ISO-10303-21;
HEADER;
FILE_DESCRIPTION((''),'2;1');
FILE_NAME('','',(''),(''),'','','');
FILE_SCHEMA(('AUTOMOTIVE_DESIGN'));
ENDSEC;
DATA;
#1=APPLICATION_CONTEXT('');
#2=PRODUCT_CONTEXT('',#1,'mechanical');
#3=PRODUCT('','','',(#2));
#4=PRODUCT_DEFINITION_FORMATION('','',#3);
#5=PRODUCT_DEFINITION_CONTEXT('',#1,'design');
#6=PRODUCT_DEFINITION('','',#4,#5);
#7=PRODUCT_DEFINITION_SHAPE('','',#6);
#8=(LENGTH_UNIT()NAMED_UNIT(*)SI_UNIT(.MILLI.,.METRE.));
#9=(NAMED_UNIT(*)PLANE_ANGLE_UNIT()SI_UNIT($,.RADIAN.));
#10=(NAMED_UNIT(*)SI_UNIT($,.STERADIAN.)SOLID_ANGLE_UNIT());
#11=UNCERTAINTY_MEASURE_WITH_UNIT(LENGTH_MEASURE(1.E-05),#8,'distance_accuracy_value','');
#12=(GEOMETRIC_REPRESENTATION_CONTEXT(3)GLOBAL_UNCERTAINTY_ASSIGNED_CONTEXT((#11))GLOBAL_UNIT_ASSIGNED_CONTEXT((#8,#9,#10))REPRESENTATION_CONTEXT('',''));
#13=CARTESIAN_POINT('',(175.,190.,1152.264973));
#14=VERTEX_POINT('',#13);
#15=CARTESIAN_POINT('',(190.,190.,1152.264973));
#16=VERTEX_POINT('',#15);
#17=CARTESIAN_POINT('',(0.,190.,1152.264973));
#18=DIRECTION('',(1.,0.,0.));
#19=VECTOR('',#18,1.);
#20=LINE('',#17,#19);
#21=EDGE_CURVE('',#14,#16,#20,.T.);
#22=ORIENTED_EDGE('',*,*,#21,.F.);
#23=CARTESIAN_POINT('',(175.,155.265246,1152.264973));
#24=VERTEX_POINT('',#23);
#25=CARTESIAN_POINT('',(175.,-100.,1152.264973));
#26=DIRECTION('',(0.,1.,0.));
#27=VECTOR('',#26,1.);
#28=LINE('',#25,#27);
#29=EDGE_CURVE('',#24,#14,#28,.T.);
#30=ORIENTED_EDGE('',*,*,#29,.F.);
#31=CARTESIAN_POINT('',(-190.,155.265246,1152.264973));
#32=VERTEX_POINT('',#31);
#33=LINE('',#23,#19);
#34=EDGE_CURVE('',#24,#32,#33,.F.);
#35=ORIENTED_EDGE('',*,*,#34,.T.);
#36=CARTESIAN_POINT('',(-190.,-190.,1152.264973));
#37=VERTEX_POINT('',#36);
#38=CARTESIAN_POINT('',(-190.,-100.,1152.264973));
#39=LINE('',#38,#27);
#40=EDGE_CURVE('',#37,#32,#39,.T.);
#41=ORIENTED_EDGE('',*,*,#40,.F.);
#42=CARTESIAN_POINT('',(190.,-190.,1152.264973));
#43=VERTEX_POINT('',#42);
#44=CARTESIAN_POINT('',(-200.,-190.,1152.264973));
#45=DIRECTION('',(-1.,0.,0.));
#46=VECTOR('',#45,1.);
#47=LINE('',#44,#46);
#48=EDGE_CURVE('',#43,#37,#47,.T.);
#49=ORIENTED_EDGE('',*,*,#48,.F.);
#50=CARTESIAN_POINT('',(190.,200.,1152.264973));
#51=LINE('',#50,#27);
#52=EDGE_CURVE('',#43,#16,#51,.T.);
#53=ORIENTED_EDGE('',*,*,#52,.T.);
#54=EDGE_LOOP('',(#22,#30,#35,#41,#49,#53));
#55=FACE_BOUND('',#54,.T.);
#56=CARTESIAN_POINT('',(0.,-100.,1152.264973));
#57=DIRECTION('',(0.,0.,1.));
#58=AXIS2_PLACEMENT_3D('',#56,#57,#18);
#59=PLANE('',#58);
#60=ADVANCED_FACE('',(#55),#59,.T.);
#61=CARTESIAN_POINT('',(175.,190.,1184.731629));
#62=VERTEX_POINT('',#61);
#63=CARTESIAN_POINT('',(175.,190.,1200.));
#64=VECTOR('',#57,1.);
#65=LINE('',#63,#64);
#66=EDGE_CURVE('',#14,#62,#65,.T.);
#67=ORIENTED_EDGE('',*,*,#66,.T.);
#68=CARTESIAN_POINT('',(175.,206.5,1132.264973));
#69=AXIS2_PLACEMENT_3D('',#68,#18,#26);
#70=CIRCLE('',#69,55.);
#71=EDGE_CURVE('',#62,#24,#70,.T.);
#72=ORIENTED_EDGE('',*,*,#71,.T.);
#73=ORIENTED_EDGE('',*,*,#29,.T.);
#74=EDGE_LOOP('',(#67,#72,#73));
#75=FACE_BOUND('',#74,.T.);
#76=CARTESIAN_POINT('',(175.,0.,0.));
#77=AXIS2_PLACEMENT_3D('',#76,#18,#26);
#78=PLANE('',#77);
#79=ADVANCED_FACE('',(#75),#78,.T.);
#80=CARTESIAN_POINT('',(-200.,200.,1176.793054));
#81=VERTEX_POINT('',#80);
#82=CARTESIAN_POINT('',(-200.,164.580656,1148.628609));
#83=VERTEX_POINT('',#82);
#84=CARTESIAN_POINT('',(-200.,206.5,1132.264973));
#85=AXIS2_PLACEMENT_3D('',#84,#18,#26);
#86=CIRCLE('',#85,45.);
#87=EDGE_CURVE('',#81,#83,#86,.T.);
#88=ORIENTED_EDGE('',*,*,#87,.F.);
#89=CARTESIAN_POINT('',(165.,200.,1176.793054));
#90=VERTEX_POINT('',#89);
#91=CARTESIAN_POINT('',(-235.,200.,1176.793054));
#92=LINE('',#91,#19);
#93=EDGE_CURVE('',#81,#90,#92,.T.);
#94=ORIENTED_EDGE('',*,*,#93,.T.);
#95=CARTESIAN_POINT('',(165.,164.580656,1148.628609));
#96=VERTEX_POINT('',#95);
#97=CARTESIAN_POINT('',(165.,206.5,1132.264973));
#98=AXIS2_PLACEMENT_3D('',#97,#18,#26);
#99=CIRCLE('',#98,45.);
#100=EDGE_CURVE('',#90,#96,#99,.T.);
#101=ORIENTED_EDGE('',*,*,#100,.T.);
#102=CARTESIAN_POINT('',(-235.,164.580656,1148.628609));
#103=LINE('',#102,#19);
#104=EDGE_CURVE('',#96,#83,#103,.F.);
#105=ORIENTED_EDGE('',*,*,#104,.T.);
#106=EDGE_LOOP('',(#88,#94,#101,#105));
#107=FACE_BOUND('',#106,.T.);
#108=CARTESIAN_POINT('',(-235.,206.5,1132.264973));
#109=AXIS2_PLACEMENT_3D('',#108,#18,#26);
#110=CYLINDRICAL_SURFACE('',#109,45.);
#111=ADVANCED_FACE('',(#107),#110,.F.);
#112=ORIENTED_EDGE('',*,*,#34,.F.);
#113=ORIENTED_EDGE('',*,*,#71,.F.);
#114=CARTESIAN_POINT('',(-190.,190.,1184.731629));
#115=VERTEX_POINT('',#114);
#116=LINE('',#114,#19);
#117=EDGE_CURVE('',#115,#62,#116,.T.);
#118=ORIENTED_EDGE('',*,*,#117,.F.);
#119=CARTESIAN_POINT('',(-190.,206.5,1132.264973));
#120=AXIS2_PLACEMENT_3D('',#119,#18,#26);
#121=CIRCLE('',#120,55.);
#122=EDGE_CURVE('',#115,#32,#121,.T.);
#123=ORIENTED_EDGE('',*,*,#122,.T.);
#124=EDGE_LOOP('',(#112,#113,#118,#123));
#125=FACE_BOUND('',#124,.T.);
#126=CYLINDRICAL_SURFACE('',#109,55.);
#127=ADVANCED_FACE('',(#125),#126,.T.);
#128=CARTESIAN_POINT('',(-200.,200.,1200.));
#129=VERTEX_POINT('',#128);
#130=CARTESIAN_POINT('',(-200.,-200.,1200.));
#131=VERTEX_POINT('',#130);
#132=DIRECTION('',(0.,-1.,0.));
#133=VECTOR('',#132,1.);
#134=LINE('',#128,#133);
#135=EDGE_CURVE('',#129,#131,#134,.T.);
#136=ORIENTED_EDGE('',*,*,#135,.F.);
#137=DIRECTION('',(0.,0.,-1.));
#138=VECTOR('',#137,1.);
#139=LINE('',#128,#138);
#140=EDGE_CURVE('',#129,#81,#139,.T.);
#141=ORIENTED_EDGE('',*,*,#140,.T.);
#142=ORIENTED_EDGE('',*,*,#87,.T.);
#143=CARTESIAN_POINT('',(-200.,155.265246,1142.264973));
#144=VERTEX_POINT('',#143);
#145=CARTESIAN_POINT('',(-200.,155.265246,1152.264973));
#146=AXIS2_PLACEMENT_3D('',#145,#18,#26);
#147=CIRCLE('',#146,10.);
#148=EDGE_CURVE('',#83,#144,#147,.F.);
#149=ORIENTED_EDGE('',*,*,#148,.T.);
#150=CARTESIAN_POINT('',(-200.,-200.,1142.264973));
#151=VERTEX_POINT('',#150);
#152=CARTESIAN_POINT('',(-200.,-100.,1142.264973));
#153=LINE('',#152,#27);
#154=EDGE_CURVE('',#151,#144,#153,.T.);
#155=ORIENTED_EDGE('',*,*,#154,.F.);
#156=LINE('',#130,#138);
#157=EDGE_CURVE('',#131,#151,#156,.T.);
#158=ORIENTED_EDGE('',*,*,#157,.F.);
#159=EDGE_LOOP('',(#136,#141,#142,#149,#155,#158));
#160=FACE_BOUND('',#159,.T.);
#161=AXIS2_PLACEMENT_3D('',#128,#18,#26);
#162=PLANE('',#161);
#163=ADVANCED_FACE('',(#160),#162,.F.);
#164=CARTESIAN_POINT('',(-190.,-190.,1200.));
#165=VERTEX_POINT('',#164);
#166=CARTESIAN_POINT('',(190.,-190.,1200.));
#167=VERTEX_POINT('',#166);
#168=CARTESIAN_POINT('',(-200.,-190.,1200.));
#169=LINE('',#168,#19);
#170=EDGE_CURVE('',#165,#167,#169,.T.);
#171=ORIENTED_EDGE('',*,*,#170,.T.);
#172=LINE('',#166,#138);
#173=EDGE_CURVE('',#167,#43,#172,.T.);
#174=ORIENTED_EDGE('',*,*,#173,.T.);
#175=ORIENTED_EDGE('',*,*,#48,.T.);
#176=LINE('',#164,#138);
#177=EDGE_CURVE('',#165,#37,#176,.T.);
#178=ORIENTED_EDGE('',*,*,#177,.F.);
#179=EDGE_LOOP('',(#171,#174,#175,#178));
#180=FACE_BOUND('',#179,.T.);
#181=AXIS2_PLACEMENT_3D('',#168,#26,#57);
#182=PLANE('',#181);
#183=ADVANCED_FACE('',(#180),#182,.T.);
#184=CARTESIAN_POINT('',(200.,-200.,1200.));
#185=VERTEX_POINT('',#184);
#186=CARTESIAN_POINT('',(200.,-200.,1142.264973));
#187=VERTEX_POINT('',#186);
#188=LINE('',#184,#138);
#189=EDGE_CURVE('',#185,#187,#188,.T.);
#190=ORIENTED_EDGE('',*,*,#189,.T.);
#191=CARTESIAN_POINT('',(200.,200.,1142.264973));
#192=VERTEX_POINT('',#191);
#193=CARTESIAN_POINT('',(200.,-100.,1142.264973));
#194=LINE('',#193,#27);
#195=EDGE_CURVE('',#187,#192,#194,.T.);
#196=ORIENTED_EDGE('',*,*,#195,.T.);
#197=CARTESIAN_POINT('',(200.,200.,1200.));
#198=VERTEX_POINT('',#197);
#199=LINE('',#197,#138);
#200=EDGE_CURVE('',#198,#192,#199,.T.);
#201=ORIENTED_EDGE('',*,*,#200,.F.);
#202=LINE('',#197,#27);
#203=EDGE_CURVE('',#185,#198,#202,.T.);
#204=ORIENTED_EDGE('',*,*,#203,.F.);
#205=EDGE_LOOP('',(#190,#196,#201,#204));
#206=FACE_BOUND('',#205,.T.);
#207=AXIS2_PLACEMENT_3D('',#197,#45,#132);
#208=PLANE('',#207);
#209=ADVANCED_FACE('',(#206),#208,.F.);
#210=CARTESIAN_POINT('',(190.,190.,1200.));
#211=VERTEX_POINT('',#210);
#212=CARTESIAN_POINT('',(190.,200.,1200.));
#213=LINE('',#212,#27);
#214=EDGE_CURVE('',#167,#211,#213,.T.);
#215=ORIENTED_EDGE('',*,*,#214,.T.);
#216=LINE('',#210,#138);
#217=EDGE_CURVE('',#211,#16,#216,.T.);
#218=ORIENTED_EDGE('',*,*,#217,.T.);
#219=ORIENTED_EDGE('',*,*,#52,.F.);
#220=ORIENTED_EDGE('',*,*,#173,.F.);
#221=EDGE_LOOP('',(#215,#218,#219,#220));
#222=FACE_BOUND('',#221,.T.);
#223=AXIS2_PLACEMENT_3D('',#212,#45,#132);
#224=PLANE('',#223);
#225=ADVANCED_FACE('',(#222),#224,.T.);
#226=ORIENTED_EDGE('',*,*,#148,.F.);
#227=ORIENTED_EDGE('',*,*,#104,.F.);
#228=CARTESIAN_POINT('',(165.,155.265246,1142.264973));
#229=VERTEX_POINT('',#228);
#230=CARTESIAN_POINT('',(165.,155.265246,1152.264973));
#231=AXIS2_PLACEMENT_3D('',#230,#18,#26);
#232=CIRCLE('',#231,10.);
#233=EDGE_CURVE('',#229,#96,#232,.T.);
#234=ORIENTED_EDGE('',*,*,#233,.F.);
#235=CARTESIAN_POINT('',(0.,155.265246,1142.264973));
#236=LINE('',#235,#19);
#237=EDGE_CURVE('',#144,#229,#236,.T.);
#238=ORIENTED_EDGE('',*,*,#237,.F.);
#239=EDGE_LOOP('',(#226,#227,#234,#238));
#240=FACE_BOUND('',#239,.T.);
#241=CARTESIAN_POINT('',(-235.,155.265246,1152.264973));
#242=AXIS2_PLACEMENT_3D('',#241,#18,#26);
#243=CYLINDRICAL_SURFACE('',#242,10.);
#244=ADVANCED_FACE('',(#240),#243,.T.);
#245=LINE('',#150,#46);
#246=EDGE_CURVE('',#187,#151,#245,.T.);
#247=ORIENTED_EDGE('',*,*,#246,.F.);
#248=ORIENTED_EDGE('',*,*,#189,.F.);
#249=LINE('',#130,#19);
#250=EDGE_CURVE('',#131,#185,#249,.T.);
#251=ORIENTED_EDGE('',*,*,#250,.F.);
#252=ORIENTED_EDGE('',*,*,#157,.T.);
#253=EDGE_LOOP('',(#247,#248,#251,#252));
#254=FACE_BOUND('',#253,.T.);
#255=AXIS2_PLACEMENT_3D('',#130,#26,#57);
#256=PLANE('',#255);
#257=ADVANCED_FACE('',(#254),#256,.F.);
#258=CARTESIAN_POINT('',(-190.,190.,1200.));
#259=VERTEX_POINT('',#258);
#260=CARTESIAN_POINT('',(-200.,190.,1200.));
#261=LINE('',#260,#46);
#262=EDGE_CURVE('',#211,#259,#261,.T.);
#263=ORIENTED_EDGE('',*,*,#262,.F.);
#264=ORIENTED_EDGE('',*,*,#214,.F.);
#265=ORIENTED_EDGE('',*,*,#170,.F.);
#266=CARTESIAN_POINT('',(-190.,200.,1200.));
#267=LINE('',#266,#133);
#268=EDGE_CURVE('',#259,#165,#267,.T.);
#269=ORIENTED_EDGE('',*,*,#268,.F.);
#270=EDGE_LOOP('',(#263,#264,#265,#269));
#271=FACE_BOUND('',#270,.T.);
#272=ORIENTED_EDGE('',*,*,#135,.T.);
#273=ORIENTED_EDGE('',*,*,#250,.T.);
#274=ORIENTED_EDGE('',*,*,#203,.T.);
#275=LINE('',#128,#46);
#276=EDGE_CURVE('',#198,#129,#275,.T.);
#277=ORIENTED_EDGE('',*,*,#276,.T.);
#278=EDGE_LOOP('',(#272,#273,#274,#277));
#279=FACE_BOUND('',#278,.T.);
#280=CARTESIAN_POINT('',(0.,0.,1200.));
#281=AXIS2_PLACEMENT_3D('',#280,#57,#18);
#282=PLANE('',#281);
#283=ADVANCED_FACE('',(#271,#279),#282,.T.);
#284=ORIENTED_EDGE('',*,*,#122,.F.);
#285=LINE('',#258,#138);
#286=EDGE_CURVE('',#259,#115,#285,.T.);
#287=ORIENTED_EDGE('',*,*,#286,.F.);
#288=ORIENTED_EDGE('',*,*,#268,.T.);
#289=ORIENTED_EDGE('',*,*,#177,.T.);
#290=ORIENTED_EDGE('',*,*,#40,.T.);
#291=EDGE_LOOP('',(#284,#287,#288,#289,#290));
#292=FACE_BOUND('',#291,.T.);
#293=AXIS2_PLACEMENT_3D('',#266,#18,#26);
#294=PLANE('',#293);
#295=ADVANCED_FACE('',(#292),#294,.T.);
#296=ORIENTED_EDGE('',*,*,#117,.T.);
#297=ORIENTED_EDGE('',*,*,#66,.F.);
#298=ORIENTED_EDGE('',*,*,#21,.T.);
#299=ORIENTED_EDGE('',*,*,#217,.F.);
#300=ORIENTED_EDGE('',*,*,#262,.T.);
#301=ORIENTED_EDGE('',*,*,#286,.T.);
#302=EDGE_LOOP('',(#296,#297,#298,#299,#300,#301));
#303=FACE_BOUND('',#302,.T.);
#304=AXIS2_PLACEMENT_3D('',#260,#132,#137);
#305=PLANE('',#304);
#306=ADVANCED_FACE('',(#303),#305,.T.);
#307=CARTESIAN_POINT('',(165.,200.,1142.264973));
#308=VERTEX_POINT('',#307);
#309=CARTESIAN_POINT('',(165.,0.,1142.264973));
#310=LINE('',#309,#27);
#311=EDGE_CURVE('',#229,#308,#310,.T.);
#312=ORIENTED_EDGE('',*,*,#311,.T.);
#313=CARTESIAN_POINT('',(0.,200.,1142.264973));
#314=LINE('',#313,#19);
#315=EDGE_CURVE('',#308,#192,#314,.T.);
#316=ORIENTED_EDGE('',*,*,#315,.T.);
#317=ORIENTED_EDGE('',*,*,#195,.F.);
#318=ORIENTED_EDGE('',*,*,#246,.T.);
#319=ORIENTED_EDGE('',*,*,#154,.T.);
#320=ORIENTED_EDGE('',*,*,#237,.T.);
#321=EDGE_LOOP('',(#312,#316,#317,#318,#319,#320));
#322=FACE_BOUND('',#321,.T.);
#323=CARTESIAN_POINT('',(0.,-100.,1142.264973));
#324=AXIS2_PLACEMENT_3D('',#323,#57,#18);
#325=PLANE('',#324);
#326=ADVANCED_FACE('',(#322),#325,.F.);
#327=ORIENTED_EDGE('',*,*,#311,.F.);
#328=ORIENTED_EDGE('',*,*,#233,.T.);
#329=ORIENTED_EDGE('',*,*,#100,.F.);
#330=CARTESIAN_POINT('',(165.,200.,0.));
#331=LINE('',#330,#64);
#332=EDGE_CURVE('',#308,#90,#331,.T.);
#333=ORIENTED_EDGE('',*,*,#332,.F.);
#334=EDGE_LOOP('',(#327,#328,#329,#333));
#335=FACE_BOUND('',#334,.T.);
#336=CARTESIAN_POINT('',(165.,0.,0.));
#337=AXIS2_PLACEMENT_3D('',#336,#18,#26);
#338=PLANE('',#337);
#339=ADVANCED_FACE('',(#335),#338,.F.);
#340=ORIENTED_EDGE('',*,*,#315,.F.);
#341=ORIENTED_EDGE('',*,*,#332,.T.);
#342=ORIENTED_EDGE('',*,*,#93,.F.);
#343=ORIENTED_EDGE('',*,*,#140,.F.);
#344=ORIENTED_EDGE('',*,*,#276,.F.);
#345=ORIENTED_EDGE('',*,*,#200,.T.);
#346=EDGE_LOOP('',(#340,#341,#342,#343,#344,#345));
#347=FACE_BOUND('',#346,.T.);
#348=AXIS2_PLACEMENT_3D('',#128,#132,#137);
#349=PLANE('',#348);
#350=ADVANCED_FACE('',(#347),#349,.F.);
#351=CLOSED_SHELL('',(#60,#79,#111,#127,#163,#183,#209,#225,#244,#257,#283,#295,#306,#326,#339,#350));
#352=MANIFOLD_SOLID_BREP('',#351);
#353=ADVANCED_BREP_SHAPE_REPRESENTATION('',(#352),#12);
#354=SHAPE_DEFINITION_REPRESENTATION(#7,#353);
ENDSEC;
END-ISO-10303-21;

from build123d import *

# Parameters (mm, degrees)
ESQUISSE1_W              = 400
ESQUISSE1_H              = 400
BOSS_EXTRU_1_DEPTH       = 1200
ESQUISSE4_W              = 400
ESQUISSE4_H              = 130.6
ENL_V_MAT_EXTRU_1_DEPTH  = 300
ENL_V_MAT_EXTRU_2_DEPTH  = 100
ESQUISSE13_W             = 400
ESQUISSE13_H             = 400
ENL_V_MAT_EXTRU_10_DEPTH = 400
ENL_V_START              = -35
ENL_V_MAT_EXTRU_11_DEPTH = 400
CONG_3_R                 = 10
ENL_V_MAT_EXTRU_12_DEPTH = 100
CONG_5_R                 = 5
COQUE1_START             = -90
COQUE1_OUTLINE_W         = 380
COQUE1_OUTLINE_H         = 591.664973081
COQUE1_DEPTH             = 280
COQUE1_START_2           = -190
COQUE1_2_DEPTH           = 345.26524617
COQUE1_3_OUTLINE_W       = 380
COQUE1_3_OUTLINE_H       = 150.6
COQUE1_3_DEPTH           = 80
COQUE1_4_DEPTH           = 380
COQUE1_START_3           = 175
COQUE1_5_DEPTH           = 15
ESQUISSE21_W             = 360
ESQUISSE21_H             = 260
ENL_V_MAT_EXTRU_13_DEPTH = 300
ENL_V_MAT_EXTRU_14_DEPTH = 674.894679675
ENL_V_MAT_EXTRU_15_DEPTH = 280
ESQUISSE24_W             = 400
ESQUISSE24_H             = 742.264973081
ENL_V_MAT_EXTRU_16_DEPTH = 1281.624847487
BOSS_EXTRU_2_REACH       = 1257.428
ESQUISSE25_W             = 380
ESQUISSE25_H             = 10


with BuildPart() as part:
    # Esquisse1 → Boss.-Extru.1 (new body)
    with BuildSketch(Plane.XY):
        Rectangle(ESQUISSE1_W, ESQUISSE1_H)
    extrude(amount=BOSS_EXTRU_1_DEPTH)

    # Esquisse4 → Enlèv. mat.-Extru.1 (cut)
    with BuildSketch(Plane(origin=(0, 200, 0), x_dir=(1, 0, 0), z_dir=(0, 1, 0))):
        with Locations((0, -1076.964973081)):
            Rectangle(ESQUISSE4_W, ESQUISSE4_H)
    extrude(amount=-ENL_V_MAT_EXTRU_1_DEPTH, mode=Mode.SUBTRACT)

    # Esquisse5 → Enlèv. mat.-Extru.2 (cut)
    with BuildSketch(Plane.XZ.offset(200)):
        with BuildLine():
            Line((-145, 902.264973081), (145, 902.264973081))
            ThreePointArc((145, 902.264973081), (155.606601718, 897.871574799), (160, 887.264973081))
            Line((160, 887.264973081), (160, 797.264973081))
            ThreePointArc((160, 797.264973081), (155.606601718, 786.658371363), (145, 782.264973081))
            Line((145, 782.264973081), (-145, 782.264973081))
            ThreePointArc((-145, 782.264973081), (-155.606601718, 786.658371363), (-160, 797.264973081))
            Line((-160, 797.264973081), (-160, 887.264973081))
            ThreePointArc((-160, 887.264973081), (-155.606601718, 897.871574799), (-145, 902.264973081))
        make_face()
    extrude(amount=-ENL_V_MAT_EXTRU_2_DEPTH, mode=Mode.SUBTRACT)

    # Esquisse13 → Enlèv. mat.-Extru.10 (cut)
    with BuildSketch(Plane(origin=(0, 0, 0), x_dir=(-1, 0, 0), z_dir=(0, 0, -1))):
        Rectangle(ESQUISSE13_W, ESQUISSE13_H)
    extrude(amount=-ENL_V_MAT_EXTRU_10_DEPTH, mode=Mode.SUBTRACT)

    # Esquisse18 → Enlèv. mat.-Extru.11 (cut)
    with BuildSketch(Plane(origin=(200, 0, 0), x_dir=(0, 0, -1), z_dir=(1, 0, 0)).offset(ENL_V_START)):
        with BuildLine():
            Line((-1142.264973081, 200), (-1176.793054109, 200))
            ThreePointArc((-1176.793054109, 200), (-1165.318675352, 175.963910431), (-1142.264973081, 162.625178063))
            Line((-1142.264973081, 162.625178063), (-1142.264973081, 200))
        make_face()
    extrude(amount=-ENL_V_MAT_EXTRU_11_DEPTH, mode=Mode.SUBTRACT)

    # Congé3
    cong_3_edges = [part.edges().sort_by_distance(p)[0] for p in [
        (-17.5, 162.625178063, 1142.264973081),
    ]]
    fillet(cong_3_edges, radius=CONG_3_R)

    # Esquisse20 → Enlèv. mat.-Extru.12 (cut)
    with BuildSketch(Plane.XZ.offset(200)):
        with BuildLine():
            Line((155, 703.393343593), (-155, 703.393343593))
            ThreePointArc((-155, 703.393343593), (-169.142135624, 697.535479217), (-175, 683.393343593))
            Line((-175, 683.393343593), (-175, 400))
            Line((-175, 400), (175, 400))
            Line((175, 400), (175, 683.393343593))
            ThreePointArc((175, 683.393343593), (169.142135624, 697.535479217), (155, 703.393343593))
        make_face()
    extrude(amount=-ENL_V_MAT_EXTRU_12_DEPTH, mode=Mode.SUBTRACT)

    # Congé5
    cong_5_edges = [part.edges().sort_by_distance(p)[0] for p in [
        (0, -100, 400),
        (175, -150, 400),
        (-175, -150, 400),
    ]]
    fillet(cong_5_edges, radius=CONG_5_R)

    # Coque1: read off the stored shape, not the designer's step
    # Coque1 outline → Coque1 (cut)
    with BuildSketch(Plane(origin=(0, 0, 0), x_dir=(1, 0, 0), z_dir=(0, 1, 0)).offset(COQUE1_START)):
        with Locations((0, -705.83248654)):
            Rectangle(COQUE1_OUTLINE_W, COQUE1_OUTLINE_H)
    extrude(amount=COQUE1_DEPTH, mode=Mode.SUBTRACT)

    # Coque1 2 outline → Coque1 2 (cut)
    # profile 1 of 2: a face of its own
    with BuildSketch(Plane(origin=(0, 0, 0), x_dir=(1, 0, 0), z_dir=(0, 1, 0)).offset(COQUE1_START_2)):
        with BuildLine():
            Line((190, -1001.664973081), (190, -410))
            Line((190, -410), (185, -410))
            Line((185, -410), (185, -683.393343593))
            ThreePointArc((185, -683.393343593), (176.213203435, -704.606547029), (155, -713.393343593))
            Line((155, -713.393343593), (-155, -713.393343593))
            ThreePointArc((-155, -713.393343593), (-176.213203435, -704.606547029), (-185, -683.393343593))
            Line((-185, -683.393343593), (-185, -410))
            Line((-185, -410), (-190, -410))
            Line((-190, -410), (-190, -1001.664973081))
            Line((-190, -1001.664973081), (190, -1001.664973081))
        make_face()
        with BuildLine():
            Line((-170, -887.264973081), (-170, -797.264973081))
            ThreePointArc((-170, -797.264973081), (-162.67766953, -779.587303551), (-145, -772.264973081))
            Line((-145, -772.264973081), (145, -772.264973081))
            ThreePointArc((145, -772.264973081), (162.67766953, -779.587303551), (170, -797.264973081))
            Line((170, -797.264973081), (170, -887.264973081))
            ThreePointArc((170, -887.264973081), (162.67766953, -904.942642611), (145, -912.264973081))
            Line((145, -912.264973081), (-145, -912.264973081))
            ThreePointArc((-145, -912.264973081), (-162.67766953, -904.942642611), (-170, -887.264973081))
        make_face(mode=Mode.SUBTRACT)
    # profile 2 of 2: a face of its own
    with BuildSketch(Plane(origin=(0, 0, 0), x_dir=(1, 0, 0), z_dir=(0, 1, 0)).offset(COQUE1_START_2)):
        Polygon((190, -1200), (190, -1152.264973081), (175, -1152.264973081), (-190, -1152.264973081), (-190, -1200), align=None)
    extrude(amount=COQUE1_2_DEPTH, mode=Mode.SUBTRACT)

    # Coque1 3 outline → Coque1 3 (cut)
    with BuildSketch(Plane(origin=(0, 0, 0), x_dir=(1, 0, 0), z_dir=(0, 1, 0)).offset(COQUE1_START_2)):
        with Locations((0, -1076.964973081)):
            Rectangle(COQUE1_3_OUTLINE_W, COQUE1_3_OUTLINE_H)
    extrude(amount=COQUE1_3_DEPTH, mode=Mode.SUBTRACT)

    # Coque1 4 outline → Coque1 4 (cut)
    with BuildSketch(Plane.YZ.offset(COQUE1_START_2)):
        with BuildLine():
            Line((190, 1184.731629159), (190, 1200))
            Line((190, 1200), (155.26524617, 1200))
            Line((155.26524617, 1200), (155.26524617, 1152.264973081))
            ThreePointArc((155.26524617, 1152.264973081), (168.943107712, 1172.445563441), (190, 1184.731629159))
        make_face()
    extrude(amount=COQUE1_4_DEPTH, mode=Mode.SUBTRACT)

    # Coque1 5 outline → Coque1 5 (cut)
    with BuildSketch(Plane.YZ.offset(COQUE1_START_3)):
        with BuildLine():
            Line((190, 1152.264973081), (190, 1184.731629159))
            ThreePointArc((190, 1184.731629159), (168.943107712, 1172.445563441), (155.26524617, 1152.264973081))
            Line((155.26524617, 1152.264973081), (190, 1152.264973081))
        make_face()
    extrude(amount=COQUE1_5_DEPTH, mode=Mode.SUBTRACT)

    # Esquisse21 → Enlèv. mat.-Extru.13 (cut)
    with BuildSketch(Plane.XY.offset(1011.664973081)):
        with Locations((0, 50)):
            Rectangle(ESQUISSE21_W, ESQUISSE21_H)
    extrude(amount=-ENL_V_MAT_EXTRU_13_DEPTH, mode=Mode.SUBTRACT)

    # Esquisse22 → Enlèv. mat.-Extru.14 (cut, through all)
    with BuildSketch(Plane.XY.offset(1011.664973081)):
        Polygon((-180, 180), (180, 180), (200, 180), (200, 200), (-200, 200), (-200, 180), align=None)
    extrude(amount=-ENL_V_MAT_EXTRU_14_DEPTH, mode=Mode.SUBTRACT)

    # Esquisse23 → Enlèv. mat.-Extru.15 (cut)
    with BuildSketch(Plane(origin=(0, 180, 0), x_dir=(1, 0, 0), z_dir=(0, 1, 0))):
        Polygon((-200, -410), (-190, -410), (190, -410), (200, -410), (200, -400), (-200, -400), align=None)
    extrude(amount=-ENL_V_MAT_EXTRU_15_DEPTH, mode=Mode.SUBTRACT)

    # Esquisse24 → Enlèv. mat.-Extru.16 (cut, through all)
    with BuildSketch(Plane.XZ.offset(200)):
        with Locations((0, 771.132486541)):
            Rectangle(ESQUISSE24_W, ESQUISSE24_H)
    extrude(amount=-ENL_V_MAT_EXTRU_16_DEPTH, mode=Mode.SUBTRACT)

    # Esquisse25 → Boss.-Extru.2 (add, up to next)
    with BuildSketch(Plane.XZ.offset(110), mode=Mode.PRIVATE) as boss_extru_2_sk1:
        with Locations((0, 1147.264973081)):
            Rectangle(ESQUISSE25_W, ESQUISSE25_H)
    boss_extru_2_tool1 = extrude(boss_extru_2_sk1.sketch, amount=BOSS_EXTRU_2_REACH, mode=Mode.PRIVATE) - part.part
    add(boss_extru_2_tool1.solids().sort_by_distance((0, -110, 1147.264973))[0])


solid = part.part
